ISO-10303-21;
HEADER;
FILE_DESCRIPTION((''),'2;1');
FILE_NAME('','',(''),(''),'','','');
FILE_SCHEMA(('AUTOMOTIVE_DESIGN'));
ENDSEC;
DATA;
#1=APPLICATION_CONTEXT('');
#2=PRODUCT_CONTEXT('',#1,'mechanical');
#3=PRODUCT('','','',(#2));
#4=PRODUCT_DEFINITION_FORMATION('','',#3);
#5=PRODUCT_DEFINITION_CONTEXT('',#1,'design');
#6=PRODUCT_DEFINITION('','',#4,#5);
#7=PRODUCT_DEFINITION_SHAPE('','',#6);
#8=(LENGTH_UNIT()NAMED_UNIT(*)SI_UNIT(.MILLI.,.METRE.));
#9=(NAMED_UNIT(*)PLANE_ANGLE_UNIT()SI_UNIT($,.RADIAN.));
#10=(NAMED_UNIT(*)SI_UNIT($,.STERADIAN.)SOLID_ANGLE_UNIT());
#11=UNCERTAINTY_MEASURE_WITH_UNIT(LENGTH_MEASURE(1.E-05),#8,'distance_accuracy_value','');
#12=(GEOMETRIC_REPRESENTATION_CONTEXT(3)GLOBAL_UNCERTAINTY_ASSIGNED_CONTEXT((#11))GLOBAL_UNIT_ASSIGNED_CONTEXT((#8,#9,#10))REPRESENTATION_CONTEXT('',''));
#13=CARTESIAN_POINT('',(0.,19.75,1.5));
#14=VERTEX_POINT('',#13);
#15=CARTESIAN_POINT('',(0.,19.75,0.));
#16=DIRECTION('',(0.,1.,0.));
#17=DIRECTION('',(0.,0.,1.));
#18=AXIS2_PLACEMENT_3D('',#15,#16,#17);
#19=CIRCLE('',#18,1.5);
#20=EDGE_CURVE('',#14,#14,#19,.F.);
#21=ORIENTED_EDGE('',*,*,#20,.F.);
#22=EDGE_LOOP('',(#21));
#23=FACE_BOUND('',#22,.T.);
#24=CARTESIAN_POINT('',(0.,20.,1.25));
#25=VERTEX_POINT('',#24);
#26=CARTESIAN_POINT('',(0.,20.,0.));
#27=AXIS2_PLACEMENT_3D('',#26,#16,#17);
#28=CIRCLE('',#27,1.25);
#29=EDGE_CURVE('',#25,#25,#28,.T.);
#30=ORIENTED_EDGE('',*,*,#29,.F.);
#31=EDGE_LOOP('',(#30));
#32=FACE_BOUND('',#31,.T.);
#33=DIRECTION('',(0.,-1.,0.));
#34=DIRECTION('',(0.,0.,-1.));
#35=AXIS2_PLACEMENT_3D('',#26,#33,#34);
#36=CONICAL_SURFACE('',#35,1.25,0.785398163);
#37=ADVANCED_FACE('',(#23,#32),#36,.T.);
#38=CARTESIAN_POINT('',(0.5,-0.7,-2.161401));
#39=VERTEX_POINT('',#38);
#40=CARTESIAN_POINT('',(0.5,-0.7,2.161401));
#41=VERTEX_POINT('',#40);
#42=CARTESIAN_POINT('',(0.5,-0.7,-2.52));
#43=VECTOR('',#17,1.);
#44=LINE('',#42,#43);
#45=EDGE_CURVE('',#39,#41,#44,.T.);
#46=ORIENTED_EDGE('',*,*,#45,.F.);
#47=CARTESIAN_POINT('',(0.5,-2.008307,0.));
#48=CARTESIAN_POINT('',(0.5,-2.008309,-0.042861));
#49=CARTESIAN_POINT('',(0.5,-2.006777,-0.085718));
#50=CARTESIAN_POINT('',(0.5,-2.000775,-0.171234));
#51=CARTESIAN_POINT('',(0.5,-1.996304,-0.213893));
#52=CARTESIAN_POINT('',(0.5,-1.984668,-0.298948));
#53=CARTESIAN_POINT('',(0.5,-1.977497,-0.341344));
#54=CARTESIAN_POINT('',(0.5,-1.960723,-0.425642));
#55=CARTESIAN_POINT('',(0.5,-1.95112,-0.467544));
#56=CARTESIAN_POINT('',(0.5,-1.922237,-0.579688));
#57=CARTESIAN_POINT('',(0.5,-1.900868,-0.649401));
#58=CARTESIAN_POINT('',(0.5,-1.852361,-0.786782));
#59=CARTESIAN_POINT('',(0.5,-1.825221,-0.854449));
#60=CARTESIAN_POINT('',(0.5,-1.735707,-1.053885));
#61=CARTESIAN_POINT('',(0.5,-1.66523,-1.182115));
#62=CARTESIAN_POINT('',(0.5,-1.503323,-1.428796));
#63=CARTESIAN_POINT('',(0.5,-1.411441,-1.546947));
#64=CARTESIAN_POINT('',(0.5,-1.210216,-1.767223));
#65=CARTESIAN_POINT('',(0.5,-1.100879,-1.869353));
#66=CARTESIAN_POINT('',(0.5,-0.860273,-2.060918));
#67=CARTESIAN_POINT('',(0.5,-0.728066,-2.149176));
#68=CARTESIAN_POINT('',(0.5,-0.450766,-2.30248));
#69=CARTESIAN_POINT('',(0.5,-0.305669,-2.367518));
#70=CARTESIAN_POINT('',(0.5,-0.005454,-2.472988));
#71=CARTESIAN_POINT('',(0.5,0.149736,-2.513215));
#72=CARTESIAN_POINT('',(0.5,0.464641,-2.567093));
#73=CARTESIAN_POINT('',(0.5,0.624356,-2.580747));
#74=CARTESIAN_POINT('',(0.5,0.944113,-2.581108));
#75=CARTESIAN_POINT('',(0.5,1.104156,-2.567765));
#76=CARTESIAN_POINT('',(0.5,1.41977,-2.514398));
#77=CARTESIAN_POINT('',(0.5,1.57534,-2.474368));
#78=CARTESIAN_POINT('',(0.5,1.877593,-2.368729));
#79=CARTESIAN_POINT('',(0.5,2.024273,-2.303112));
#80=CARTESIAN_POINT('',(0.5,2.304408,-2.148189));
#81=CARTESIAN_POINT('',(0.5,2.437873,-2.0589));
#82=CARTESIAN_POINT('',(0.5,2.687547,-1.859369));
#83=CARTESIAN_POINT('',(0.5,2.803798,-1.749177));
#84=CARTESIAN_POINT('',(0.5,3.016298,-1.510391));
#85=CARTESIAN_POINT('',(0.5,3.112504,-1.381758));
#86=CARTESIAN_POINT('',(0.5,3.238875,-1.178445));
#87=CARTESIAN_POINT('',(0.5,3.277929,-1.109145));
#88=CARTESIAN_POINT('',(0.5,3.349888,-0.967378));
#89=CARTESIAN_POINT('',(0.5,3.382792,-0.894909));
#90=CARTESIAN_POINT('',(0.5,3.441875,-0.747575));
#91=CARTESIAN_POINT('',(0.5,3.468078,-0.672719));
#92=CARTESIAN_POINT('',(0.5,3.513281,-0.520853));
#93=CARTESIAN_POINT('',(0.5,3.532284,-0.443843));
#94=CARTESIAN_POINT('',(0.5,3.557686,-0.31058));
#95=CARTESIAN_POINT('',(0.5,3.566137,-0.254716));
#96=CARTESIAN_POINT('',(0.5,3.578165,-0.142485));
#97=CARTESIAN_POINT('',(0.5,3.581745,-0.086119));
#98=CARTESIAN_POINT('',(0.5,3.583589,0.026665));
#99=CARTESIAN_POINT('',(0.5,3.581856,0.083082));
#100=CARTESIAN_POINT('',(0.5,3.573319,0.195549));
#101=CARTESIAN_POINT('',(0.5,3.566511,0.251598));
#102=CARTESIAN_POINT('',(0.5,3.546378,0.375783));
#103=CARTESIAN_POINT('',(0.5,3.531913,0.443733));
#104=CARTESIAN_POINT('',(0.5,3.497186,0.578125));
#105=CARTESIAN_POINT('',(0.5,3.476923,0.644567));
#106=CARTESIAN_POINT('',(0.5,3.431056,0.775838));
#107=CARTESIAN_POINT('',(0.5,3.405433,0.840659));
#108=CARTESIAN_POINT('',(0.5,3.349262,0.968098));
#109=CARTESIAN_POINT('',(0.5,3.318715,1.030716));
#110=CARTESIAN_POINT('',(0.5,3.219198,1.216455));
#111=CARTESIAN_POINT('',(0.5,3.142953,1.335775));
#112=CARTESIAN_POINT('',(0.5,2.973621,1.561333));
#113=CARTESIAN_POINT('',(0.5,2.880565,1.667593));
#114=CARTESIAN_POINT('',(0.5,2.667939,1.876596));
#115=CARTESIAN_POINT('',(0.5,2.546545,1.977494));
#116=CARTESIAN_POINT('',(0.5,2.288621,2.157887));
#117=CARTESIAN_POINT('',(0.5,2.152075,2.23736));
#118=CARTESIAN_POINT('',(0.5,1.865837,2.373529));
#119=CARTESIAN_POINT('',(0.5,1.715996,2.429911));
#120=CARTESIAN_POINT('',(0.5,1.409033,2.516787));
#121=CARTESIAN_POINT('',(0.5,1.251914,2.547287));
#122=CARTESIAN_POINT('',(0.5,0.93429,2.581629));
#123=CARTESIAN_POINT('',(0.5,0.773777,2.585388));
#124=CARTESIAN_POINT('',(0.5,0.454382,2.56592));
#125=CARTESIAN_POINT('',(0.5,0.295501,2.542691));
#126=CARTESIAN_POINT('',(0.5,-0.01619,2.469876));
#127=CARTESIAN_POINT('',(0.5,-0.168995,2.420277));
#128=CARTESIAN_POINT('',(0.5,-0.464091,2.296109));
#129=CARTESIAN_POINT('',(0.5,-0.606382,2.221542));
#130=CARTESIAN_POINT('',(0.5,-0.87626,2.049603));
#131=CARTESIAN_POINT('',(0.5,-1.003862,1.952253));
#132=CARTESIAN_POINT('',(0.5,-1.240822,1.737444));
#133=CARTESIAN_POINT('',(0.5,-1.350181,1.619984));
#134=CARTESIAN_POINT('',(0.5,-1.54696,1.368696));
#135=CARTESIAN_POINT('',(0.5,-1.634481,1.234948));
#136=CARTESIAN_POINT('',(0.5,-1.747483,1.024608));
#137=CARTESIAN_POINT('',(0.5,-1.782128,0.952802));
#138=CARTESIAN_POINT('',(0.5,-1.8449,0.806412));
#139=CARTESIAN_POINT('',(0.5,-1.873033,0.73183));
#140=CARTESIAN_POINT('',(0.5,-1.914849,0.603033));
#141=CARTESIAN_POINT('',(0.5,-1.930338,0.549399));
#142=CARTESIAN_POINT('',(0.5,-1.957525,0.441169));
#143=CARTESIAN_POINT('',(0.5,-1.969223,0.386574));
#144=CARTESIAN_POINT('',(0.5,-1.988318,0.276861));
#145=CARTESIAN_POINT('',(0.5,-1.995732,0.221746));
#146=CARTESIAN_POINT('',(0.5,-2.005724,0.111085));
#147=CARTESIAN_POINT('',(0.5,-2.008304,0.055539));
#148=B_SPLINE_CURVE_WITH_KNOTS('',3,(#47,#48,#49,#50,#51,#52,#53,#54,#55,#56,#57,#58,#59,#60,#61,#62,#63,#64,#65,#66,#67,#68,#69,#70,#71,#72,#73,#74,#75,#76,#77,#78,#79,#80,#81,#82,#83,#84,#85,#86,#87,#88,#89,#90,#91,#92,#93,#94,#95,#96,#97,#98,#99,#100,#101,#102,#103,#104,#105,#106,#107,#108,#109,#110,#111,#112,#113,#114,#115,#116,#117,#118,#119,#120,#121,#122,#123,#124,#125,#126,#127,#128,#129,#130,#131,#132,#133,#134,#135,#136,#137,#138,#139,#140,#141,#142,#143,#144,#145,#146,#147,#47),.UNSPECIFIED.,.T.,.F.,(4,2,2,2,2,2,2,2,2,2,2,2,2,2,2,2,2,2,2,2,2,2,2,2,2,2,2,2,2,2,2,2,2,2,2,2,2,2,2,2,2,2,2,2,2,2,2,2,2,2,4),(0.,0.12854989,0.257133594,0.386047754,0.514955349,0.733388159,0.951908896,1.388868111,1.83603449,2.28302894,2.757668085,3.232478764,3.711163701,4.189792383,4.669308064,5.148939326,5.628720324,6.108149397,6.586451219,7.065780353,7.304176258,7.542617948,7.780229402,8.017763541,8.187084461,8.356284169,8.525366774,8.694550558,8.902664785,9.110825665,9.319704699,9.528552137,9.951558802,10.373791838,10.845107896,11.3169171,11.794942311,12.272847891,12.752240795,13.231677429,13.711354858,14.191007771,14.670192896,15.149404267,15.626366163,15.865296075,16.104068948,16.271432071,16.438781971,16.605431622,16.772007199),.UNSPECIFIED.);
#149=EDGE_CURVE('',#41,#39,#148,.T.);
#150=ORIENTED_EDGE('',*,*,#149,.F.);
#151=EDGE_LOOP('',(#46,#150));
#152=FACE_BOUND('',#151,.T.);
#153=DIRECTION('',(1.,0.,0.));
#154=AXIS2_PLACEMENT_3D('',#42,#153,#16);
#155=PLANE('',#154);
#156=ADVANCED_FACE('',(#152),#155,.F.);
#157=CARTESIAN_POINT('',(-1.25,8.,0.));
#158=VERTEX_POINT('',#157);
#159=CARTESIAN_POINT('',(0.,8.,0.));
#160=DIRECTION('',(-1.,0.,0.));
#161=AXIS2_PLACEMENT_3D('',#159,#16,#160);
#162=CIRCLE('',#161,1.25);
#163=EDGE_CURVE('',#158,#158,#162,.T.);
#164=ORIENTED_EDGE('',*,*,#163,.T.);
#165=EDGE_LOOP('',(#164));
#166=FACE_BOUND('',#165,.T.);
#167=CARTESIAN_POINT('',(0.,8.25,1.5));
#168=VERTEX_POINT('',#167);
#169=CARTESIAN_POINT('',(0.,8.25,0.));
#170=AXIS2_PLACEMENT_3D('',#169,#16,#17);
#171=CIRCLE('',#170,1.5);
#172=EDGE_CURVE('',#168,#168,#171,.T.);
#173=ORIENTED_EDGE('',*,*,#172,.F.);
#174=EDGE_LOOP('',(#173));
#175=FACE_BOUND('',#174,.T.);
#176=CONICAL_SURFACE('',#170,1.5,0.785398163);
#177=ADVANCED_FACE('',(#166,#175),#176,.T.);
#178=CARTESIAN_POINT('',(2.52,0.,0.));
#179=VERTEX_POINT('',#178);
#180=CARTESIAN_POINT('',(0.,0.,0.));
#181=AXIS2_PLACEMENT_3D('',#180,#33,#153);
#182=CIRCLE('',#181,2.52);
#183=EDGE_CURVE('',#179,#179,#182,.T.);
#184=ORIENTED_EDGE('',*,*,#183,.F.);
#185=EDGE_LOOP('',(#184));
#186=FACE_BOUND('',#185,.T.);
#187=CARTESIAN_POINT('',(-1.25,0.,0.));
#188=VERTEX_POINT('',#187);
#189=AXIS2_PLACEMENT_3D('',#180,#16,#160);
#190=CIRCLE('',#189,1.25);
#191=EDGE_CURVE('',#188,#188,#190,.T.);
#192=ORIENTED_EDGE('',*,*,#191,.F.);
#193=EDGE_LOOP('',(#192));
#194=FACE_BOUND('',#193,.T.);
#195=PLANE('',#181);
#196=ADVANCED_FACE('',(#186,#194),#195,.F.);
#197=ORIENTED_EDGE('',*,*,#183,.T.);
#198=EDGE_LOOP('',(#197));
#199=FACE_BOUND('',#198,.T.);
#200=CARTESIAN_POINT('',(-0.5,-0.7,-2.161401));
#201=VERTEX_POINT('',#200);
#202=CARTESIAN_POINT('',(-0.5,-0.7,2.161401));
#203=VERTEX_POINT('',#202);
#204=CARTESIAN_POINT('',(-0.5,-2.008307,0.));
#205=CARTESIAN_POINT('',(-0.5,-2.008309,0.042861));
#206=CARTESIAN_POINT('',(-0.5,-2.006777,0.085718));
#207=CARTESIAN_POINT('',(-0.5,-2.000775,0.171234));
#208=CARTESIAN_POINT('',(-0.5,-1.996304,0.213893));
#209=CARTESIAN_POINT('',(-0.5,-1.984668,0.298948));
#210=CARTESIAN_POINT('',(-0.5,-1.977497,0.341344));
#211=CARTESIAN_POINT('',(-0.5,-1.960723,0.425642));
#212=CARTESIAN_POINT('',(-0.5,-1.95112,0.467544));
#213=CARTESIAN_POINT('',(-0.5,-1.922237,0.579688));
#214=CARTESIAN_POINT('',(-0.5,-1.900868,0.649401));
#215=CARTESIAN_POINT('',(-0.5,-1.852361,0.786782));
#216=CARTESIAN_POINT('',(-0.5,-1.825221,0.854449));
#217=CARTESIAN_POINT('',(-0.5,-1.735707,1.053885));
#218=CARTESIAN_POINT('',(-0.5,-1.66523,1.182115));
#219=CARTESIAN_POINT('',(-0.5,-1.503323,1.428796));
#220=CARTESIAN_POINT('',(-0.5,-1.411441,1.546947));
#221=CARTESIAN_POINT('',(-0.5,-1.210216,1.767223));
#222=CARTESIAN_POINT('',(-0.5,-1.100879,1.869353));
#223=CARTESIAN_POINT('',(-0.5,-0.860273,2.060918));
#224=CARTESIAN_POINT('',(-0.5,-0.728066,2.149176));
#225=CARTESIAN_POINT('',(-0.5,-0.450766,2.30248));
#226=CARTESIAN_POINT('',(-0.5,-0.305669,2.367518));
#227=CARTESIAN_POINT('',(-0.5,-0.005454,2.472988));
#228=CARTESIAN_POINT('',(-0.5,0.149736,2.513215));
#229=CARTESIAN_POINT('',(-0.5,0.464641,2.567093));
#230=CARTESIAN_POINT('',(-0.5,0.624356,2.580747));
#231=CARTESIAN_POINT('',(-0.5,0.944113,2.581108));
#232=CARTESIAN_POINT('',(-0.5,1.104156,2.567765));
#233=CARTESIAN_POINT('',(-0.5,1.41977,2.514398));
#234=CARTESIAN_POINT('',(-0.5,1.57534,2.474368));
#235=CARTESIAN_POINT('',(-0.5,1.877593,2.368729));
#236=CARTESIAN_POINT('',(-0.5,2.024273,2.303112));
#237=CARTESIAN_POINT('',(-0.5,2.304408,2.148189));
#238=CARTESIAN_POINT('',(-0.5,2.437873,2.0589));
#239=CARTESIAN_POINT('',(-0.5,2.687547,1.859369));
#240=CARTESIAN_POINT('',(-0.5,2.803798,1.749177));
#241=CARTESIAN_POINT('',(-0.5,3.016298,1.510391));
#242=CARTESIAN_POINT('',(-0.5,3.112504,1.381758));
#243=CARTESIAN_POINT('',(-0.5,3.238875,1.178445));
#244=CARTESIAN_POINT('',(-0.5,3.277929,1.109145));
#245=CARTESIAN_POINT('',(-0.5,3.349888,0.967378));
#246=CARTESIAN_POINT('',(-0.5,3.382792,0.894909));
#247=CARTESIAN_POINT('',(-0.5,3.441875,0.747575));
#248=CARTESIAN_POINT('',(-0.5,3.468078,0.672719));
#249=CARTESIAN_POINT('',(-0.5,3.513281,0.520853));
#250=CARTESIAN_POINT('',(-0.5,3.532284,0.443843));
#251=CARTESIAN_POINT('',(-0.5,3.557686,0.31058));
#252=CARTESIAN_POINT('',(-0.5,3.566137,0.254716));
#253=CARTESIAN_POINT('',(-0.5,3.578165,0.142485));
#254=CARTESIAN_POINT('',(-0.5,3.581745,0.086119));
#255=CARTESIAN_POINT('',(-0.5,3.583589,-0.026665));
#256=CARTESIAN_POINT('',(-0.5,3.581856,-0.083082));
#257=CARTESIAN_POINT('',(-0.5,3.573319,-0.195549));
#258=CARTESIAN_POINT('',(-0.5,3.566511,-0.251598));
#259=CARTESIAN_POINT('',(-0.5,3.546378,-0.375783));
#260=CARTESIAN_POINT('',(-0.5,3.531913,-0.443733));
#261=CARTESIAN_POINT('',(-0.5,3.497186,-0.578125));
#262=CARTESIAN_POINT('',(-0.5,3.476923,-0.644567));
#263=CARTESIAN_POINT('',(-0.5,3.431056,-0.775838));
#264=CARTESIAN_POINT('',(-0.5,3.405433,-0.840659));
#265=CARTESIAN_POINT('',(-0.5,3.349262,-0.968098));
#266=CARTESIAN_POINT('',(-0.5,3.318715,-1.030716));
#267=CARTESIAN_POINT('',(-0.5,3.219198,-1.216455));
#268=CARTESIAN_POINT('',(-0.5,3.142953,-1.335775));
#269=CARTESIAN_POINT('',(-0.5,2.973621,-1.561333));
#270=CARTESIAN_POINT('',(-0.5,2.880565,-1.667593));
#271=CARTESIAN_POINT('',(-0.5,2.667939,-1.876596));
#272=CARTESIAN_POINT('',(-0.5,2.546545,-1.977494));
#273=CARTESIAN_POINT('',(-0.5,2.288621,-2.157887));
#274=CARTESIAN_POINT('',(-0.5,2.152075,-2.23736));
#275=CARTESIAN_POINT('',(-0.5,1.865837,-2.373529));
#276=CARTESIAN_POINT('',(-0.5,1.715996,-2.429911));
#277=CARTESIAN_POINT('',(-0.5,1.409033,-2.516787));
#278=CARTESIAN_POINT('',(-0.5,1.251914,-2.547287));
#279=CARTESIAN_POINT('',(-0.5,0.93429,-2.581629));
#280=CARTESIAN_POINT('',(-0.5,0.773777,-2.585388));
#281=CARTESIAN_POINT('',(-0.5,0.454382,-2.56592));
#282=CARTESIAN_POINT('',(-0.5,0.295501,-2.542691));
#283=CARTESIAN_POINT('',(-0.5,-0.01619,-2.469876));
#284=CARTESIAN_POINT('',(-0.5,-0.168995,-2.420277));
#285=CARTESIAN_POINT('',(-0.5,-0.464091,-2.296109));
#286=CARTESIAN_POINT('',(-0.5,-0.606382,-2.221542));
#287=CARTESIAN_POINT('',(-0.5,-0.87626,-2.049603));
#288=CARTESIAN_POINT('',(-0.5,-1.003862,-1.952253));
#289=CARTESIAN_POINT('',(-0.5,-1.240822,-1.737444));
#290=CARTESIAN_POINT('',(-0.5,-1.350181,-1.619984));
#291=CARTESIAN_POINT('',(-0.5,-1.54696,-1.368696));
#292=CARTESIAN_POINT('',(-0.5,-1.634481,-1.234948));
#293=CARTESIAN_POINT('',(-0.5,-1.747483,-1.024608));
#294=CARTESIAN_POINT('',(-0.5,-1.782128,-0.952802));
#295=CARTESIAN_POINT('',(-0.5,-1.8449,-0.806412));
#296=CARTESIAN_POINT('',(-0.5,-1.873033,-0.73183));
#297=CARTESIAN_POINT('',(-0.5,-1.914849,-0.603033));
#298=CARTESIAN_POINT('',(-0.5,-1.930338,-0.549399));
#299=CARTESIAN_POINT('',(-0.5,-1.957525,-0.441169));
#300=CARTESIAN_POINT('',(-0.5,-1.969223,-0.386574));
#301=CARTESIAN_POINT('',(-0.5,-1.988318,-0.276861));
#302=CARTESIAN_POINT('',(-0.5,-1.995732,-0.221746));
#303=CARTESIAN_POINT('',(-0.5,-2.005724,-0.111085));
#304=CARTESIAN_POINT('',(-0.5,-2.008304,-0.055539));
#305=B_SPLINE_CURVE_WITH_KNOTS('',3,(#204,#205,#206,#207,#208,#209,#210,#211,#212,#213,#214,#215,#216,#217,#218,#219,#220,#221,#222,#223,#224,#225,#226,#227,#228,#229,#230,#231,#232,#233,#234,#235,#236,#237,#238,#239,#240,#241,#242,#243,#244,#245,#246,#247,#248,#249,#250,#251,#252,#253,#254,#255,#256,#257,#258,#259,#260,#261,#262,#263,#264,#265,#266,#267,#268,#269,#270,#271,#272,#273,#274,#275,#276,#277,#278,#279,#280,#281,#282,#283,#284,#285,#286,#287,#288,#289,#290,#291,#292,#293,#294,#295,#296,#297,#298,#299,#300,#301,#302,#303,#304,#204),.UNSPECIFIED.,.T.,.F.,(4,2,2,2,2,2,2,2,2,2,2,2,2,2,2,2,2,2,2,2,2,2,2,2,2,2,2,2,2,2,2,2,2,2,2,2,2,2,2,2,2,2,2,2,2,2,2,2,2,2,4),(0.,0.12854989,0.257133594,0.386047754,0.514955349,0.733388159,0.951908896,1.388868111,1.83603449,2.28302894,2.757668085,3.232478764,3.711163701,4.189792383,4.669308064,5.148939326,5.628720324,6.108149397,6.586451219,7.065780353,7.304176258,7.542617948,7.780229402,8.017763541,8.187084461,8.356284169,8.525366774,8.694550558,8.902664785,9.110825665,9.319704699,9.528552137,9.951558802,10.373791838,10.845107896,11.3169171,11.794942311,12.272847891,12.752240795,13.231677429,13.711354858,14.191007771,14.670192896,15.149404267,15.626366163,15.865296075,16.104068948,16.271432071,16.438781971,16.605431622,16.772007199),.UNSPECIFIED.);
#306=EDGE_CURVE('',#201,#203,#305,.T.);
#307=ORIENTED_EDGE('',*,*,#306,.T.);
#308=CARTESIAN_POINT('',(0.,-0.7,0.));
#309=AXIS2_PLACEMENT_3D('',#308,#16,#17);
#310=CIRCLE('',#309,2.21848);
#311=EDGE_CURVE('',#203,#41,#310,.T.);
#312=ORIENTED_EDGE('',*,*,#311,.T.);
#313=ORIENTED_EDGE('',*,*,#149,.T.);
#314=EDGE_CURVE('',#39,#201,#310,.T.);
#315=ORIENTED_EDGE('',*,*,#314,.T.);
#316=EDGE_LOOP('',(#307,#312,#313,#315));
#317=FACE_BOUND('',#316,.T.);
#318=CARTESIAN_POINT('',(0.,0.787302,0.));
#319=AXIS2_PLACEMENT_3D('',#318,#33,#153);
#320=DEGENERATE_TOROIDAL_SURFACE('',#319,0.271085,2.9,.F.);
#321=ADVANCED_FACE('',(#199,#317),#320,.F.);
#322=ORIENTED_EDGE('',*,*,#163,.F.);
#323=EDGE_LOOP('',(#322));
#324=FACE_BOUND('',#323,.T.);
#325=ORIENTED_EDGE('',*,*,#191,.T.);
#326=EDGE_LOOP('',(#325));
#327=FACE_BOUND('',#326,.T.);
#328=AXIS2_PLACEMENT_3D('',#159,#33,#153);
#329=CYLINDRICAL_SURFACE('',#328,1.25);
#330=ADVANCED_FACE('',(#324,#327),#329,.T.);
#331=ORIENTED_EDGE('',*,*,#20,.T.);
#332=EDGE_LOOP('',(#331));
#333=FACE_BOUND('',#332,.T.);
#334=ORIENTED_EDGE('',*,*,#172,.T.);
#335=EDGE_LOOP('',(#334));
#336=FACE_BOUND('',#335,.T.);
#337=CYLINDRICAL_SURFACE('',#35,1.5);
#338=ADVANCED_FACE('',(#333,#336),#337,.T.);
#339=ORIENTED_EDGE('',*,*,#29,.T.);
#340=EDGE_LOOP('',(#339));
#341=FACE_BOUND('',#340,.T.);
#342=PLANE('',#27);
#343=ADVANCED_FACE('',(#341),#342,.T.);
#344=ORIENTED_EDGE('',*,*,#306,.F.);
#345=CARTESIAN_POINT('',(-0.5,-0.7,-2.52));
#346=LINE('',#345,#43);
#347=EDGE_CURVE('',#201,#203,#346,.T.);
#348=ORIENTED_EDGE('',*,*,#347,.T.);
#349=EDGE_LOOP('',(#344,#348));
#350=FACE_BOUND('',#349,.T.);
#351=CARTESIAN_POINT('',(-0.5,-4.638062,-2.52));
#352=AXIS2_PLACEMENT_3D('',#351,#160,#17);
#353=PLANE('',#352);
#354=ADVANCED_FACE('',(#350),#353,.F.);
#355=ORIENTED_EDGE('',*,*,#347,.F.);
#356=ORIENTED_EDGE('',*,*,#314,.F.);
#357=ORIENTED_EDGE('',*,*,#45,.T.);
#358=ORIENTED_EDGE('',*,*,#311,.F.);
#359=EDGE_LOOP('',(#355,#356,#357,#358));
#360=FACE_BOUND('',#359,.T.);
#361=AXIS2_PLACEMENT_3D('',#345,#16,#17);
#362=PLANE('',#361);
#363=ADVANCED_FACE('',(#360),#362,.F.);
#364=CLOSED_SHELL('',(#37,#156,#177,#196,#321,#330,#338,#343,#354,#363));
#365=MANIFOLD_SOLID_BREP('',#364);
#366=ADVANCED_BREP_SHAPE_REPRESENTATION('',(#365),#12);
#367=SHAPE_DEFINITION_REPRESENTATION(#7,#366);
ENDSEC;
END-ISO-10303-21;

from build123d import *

# Parameters (mm, degrees)
SKETCH1_R               = 1.5
BOSS_EXTRUDE1_DEPTH     = 20
CUT_EXTRUDE1_DEPTH      = 21.315038789
CUT_EXTRUDE1_DEPTH_BACK = 21.315038789
SKETCH4_R               = 2.52
SKETCH4_R_2             = 1.25
CUT_EXTRUDE2_DEPTH      = 8
CHAMFER1_SIZE           = 0.25


with BuildPart() as part:
    # Sketch1 → Boss-Extrude1 (new body)
    with BuildSketch(Plane(origin=(0, 0, 0), x_dir=(1, 0, 0), z_dir=(0, 1, 0))):
        with Locations(Location((0, 0, 0), (0, 0, 270))):
            Circle(SKETCH1_R)
    extrude(amount=BOSS_EXTRUDE1_DEPTH)

    # Sketch2 → Revolve1 (revolve)
    with BuildSketch(Plane.XY, mode=Mode.PRIVATE) as revolve1_sk:
        with BuildLine():
            Line((0, 0), (-2.52, 0))
            ThreePointArc((-2.52, 0), (-1.585449748, -1.440539697), (0, -2.1))
            Line((0, -2.1), (0, 0))
        make_face()
    revolve(revolve1_sk.sketch.rotate(Axis((0, -2.1, 0), (0, 1, 0)), 180), axis=Axis((0, -2.1, 0), (0, 1, 0)))

    # Sketch3 → Cut-Extrude1 (cut, two sides: drawn at the far end of the back side and taken through both)
    with BuildSketch(Plane.XY.offset(-CUT_EXTRUDE1_DEPTH_BACK)):
        Polygon((-0.5, -0.7), (0, -0.7), (0.5, -0.7), (0.5, -4.6380618), (-0.5, -4.6380618), align=None)
    extrude(amount=CUT_EXTRUDE1_DEPTH + CUT_EXTRUDE1_DEPTH_BACK, mode=Mode.SUBTRACT)

    # Sketch4 → Cut-Extrude2 (cut)
    with BuildSketch(Plane(origin=(0, 0, 0), x_dir=(1, 0, 0), z_dir=(0, 1, 0))):
        Circle(SKETCH4_R)
        with Locations(Location((0, 0, 0), (0, 0, 180))):
            Circle(SKETCH4_R_2, mode=Mode.SUBTRACT)
    extrude(amount=CUT_EXTRUDE2_DEPTH, mode=Mode.SUBTRACT)

    # Chamfer1
    chamfer1_edges = [part.edges().sort_by_distance(p)[0] for p in [
        (0, 8, -1.5),
        (0, 20, -1.5),
    ]]
    chamfer(chamfer1_edges, length=CHAMFER1_SIZE - 0.0001)  # a hair under: the kernel refuses the full size


solid = part.part
